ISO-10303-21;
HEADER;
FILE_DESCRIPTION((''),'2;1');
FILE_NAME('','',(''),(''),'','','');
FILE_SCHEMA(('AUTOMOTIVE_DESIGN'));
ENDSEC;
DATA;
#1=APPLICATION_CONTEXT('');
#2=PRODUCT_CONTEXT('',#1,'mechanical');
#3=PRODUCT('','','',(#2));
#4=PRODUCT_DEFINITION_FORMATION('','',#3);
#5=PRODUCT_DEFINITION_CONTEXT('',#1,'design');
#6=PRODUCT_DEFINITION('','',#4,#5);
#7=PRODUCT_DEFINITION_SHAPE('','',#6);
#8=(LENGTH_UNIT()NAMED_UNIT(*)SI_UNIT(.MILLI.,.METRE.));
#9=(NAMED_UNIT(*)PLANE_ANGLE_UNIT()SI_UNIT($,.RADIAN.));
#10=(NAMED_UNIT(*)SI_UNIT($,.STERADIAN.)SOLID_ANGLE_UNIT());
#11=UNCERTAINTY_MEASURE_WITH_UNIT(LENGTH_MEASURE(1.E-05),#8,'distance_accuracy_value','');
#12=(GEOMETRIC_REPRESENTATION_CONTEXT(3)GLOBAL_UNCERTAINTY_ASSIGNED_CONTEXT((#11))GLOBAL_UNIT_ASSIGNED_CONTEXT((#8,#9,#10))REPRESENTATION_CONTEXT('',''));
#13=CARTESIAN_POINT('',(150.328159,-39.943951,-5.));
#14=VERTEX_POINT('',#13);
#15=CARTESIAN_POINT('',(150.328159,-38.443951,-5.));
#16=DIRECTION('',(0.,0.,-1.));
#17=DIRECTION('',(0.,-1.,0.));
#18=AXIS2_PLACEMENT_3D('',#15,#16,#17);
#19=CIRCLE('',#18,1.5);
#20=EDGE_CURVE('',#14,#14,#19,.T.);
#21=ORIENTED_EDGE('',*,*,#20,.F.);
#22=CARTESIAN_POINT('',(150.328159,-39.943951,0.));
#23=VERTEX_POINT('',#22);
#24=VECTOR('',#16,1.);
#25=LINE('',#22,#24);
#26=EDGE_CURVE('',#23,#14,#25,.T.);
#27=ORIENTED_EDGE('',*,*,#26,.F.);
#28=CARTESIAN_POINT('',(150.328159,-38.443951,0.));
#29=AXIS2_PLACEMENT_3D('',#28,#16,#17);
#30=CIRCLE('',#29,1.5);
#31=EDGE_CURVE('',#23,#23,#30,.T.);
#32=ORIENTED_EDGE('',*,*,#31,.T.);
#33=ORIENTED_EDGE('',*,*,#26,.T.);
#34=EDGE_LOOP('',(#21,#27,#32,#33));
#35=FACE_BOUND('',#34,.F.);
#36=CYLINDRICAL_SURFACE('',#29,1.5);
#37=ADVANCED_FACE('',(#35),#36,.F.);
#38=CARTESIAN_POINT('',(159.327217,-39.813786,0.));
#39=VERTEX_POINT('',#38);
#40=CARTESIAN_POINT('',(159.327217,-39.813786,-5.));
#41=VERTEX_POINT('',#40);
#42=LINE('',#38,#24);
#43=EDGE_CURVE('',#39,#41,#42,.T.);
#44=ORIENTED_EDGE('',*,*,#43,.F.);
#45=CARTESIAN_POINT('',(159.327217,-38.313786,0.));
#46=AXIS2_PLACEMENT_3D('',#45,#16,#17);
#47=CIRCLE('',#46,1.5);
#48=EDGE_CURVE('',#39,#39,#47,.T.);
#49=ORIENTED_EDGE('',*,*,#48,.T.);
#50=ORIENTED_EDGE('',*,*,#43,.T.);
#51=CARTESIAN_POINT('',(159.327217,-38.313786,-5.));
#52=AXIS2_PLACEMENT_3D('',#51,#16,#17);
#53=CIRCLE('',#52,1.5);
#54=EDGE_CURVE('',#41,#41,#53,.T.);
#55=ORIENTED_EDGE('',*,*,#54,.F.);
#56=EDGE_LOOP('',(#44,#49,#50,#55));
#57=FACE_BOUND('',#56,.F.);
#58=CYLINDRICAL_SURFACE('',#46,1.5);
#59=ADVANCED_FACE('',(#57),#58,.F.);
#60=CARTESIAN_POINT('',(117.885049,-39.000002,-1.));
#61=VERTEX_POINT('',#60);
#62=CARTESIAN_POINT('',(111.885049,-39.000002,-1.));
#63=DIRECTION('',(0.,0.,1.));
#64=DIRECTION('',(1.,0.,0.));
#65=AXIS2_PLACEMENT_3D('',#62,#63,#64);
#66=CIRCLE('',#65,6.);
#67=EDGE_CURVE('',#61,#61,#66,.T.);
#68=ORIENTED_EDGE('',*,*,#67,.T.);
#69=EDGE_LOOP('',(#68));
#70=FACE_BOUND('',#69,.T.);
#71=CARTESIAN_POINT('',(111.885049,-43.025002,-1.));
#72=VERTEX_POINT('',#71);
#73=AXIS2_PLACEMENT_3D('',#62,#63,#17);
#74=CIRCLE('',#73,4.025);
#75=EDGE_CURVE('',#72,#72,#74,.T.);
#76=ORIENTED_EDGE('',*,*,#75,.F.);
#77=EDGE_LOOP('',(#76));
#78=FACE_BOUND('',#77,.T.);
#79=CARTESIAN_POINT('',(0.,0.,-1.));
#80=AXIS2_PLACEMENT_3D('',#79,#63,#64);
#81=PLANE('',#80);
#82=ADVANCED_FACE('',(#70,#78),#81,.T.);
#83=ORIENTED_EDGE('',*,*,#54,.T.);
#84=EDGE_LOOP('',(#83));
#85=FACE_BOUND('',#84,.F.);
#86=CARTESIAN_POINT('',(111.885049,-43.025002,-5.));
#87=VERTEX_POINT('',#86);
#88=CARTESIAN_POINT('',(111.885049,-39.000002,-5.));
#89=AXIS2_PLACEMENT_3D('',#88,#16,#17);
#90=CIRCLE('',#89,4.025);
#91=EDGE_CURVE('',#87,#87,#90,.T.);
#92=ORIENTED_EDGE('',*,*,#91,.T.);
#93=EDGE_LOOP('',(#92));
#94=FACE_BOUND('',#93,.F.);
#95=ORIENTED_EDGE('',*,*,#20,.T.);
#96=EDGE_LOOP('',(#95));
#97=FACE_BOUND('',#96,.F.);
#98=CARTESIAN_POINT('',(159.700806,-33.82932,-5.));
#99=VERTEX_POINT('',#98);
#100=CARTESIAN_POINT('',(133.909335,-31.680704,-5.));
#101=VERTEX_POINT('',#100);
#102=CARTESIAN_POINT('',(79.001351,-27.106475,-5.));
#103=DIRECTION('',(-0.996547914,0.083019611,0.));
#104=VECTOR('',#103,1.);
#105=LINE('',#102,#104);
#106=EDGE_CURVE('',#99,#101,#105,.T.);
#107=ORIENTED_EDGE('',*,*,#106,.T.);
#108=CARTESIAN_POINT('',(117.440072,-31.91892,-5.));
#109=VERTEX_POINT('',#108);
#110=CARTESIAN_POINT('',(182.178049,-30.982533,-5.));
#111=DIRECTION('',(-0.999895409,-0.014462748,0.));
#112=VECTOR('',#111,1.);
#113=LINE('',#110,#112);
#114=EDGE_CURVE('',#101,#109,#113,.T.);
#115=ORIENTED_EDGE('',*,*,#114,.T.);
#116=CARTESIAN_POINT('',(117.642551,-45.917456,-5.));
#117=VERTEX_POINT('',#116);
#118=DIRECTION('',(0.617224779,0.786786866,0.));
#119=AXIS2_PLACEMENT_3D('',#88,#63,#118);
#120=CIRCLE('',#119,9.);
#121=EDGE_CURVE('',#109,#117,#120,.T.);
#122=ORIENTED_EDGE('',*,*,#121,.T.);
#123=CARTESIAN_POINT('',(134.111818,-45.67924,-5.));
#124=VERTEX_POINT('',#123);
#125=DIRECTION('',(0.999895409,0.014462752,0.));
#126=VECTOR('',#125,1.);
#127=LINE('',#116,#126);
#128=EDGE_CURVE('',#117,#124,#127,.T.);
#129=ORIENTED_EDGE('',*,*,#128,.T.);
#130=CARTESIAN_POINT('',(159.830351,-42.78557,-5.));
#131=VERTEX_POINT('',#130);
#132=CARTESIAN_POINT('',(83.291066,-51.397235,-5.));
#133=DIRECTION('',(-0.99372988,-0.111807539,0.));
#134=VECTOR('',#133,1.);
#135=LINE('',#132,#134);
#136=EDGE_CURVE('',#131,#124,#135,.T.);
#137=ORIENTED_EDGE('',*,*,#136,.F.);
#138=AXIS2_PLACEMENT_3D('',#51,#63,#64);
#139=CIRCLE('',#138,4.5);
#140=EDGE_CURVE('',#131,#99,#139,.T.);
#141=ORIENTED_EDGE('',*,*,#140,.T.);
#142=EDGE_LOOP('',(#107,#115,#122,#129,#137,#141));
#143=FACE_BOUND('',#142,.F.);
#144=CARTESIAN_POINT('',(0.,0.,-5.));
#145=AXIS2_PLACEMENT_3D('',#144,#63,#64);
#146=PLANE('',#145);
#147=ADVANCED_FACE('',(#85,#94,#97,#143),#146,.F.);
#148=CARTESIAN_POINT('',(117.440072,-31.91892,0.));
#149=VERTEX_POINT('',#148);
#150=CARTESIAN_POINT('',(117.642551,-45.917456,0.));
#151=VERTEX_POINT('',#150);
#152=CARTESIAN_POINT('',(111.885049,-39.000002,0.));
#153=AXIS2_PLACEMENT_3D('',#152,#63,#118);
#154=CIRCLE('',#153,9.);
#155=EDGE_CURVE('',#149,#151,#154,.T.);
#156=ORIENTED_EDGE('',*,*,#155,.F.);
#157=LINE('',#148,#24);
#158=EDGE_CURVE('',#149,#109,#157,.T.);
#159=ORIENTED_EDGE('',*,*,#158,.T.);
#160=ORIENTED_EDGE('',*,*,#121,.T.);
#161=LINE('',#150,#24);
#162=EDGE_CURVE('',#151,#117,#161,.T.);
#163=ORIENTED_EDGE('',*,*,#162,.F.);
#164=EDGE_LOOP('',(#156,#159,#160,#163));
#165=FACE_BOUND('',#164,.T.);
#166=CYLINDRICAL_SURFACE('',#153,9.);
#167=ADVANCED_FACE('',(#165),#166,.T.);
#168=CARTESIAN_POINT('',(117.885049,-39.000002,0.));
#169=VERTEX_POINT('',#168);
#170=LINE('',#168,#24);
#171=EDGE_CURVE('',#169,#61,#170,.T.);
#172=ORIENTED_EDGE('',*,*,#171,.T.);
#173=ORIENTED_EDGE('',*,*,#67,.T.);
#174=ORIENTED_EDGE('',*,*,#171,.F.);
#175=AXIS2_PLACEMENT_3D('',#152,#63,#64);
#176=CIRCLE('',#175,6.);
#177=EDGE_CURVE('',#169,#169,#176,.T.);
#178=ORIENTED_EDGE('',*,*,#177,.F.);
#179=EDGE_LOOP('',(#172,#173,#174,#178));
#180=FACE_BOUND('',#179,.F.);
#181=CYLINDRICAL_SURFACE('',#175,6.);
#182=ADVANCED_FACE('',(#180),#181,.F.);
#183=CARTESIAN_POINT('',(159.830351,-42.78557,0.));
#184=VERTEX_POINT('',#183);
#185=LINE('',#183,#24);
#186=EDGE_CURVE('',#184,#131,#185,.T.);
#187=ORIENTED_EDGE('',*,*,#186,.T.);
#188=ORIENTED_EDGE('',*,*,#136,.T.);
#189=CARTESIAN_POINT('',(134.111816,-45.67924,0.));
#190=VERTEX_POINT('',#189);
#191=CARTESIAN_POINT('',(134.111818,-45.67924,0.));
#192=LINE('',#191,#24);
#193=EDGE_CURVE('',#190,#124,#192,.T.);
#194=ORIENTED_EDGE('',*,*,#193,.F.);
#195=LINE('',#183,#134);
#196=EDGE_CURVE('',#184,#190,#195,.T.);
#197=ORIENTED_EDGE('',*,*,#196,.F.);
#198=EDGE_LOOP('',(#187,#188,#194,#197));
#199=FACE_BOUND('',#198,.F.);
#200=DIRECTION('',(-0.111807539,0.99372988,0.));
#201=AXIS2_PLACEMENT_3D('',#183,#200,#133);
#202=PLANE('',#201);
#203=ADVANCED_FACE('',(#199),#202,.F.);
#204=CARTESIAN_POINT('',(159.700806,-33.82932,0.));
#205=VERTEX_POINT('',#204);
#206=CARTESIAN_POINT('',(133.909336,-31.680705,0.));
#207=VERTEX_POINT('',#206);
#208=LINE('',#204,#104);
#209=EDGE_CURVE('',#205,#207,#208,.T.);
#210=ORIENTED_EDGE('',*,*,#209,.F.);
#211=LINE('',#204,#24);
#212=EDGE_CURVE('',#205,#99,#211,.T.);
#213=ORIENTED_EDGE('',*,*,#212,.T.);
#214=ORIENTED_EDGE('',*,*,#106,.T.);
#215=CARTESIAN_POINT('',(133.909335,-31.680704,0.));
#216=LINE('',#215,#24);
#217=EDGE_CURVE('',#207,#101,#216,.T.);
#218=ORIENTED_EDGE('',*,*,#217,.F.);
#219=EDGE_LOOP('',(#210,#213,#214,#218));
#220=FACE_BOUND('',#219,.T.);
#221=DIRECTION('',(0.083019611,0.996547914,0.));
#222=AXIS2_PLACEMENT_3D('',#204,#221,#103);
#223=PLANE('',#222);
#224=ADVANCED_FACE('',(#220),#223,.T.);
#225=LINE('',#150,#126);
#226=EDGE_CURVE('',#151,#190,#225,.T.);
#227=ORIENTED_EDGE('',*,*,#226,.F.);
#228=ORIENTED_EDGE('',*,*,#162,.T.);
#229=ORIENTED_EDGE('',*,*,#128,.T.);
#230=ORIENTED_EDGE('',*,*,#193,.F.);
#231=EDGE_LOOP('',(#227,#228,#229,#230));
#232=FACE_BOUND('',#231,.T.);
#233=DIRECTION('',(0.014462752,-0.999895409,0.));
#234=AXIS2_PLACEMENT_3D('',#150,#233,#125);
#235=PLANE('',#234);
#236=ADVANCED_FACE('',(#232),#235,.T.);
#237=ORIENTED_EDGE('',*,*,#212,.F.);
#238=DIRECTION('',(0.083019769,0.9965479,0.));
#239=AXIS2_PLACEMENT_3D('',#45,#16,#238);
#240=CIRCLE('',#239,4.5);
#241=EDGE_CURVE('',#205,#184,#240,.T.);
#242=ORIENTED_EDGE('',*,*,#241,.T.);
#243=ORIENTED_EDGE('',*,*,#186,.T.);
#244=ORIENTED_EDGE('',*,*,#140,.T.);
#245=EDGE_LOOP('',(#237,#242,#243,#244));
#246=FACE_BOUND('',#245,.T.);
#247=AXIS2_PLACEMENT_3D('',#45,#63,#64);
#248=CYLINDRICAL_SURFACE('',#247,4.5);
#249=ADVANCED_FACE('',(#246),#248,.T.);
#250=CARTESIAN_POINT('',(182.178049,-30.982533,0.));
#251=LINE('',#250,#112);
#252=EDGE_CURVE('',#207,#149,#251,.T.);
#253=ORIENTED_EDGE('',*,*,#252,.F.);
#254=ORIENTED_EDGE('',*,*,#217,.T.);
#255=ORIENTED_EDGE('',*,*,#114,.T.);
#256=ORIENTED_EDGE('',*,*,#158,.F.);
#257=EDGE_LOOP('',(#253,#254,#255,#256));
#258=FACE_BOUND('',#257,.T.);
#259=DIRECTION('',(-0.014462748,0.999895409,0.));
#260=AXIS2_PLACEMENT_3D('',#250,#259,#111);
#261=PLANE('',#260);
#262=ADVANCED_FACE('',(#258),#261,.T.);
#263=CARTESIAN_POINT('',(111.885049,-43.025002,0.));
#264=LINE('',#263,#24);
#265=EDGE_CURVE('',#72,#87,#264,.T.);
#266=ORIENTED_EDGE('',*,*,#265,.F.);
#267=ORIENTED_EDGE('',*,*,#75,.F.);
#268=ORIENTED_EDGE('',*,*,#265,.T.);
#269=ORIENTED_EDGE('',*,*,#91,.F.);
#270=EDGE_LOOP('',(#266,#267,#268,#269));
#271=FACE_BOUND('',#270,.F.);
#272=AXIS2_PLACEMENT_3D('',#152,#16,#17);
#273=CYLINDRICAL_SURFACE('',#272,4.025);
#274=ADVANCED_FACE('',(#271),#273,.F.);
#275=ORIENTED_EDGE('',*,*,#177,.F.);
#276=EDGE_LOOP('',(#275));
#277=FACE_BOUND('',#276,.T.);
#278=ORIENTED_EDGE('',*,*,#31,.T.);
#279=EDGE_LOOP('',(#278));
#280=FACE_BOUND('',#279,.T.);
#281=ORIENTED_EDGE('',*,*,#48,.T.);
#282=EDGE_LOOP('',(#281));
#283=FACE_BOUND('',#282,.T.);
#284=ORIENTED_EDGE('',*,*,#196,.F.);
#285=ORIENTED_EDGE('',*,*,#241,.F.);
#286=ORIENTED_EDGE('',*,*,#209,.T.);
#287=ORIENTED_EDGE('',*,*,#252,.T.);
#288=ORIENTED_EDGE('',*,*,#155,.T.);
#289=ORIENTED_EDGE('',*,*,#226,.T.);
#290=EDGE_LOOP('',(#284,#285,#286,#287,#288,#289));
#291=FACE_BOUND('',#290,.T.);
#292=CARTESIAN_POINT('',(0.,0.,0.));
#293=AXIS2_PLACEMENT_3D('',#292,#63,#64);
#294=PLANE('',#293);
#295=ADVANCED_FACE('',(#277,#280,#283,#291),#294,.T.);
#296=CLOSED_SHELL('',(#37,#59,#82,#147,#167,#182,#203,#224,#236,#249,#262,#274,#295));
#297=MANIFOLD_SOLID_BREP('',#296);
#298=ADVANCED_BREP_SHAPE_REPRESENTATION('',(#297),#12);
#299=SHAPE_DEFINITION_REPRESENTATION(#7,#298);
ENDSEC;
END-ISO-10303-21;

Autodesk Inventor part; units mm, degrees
ref_plane "YZ Plane" through (0, 0, 0) normal (1, 0, 0) x (0, 1, 0)
ref_plane "XZ Plane" through (0, 0, 0) normal (0, 1, 0) x (-1, 0, 0)
ref_plane "XY Plane" through (0, 0, 0) normal (0, 0, 1) x (1, 0, 0)
sketch "スケッチ1" plane through (0, 0, 0) normal (0, 0, 1) x (1, 0, 0)
  line L0 (-101.5, 47.999998) -> (108.5, 47.999998)
  circle A0 centre (111.885049, -39.000002) radius 4
  circle A1 centre (191.876682, -37.842982) radius 4
  circle A2 centre (111.885049, -39.000002) radius 7
  circle A3 centre (191.876682, -37.842982) radius 7
  line L1 (191.876682, -37.842982) -> (111.885049, -39.000002) construction
  line L2 (191.775442, -30.843714) -> (111.78381, -32.000734)
  line L3 (111.986288, -45.99927) -> (191.977921, -44.84225)
  arc A4 (191.977921, -44.84225) -> (191.775442, -30.843714) centre (191.876682, -37.842982) ccw
  arc A5 (111.78381, -32.000734) -> (111.986288, -45.99927) centre (111.885049, -39.000002) ccw
  line L4 (193.542302, -31.044032) -> (241.704818, -42.842982)
  circle A6 centre (234.566446, -71.981335) radius 30
  line L5 (262.587356, -82.697145) -> (213.725294, -50.402494)
  line L6 (213.725294, -50.402494) -> (190.211062, -44.641931)
  line L7 (264.566446, -121.542906) -> (264.566446, -63.2267)
  line L8 (111.885049, -39.000002) -> (111.885049, 40.999998) construction
  line L9 (118.885049, -39.000002) -> (118.885049, 40.999998)
  line L10 (104.885049, 40.999998) -> (104.885049, -39.000002)
  arc A7 (104.885049, -39.000002) -> (118.885049, -39.000002) centre (111.885049, -39.000002) ccw
  arc A8 (118.885049, 40.999998) -> (104.885049, 40.999998) centre (111.885049, 40.999998) ccw
  circle A9 centre (58.238326, 51.481995) radius 30
  line L11 (113.558078, 34.202868) -> (65.408448, 22.351438)
  line L12 (28.441083, 47.999998) -> (86.70408, 42.010942)
  line L13 (86.70408, 42.010942) -> (110.21202, 47.797128)
  circle A10 centre (113.5, -20.000002) radius 68
  line L14 (315.327237, -100.585467) -> (70.600424, 104.764712)
  line L15 (253.850074, -49.000002) -> (111.885049, -39.000002)
  arc A11 (93.592427, -27.104845) -> (135.370976, -5.924402) centre (95.060351, 21.794105) ccw
  arc A12 (135.370976, -5.924402) -> (135.847591, -3.671647) centre (132.898992, -4.224609) ccw
  arc A13 (135.847591, -3.671647) -> (83.183341, 18.55647) centre (102.157897, -9.989602) ccw
  line L16 (111.885049, -39.000002) -> (112.74718, 40.995353) construction
  line L17 (118.884642, -39.075438) -> (119.746773, 40.919916)
  line L18 (105.747586, 41.070789) -> (104.885455, -38.924565)
  arc A14 (104.885455, -38.924565) -> (118.884642, -39.075438) centre (111.885049, -39.000002) ccw
  arc A15 (119.746773, 40.919916) -> (105.747586, 41.070789) centre (112.74718, 40.995353) ccw
  line L19 (164.994898, 47.999998) -> (164.994898, 25.999998)
  line L20 (164.994898, 25.999998) -> (327.494898, -102.000002)
  circle A16 centre (116.292557, -40.000002) radius 68
  circle A17 centre (-98.885049, -0.000002) radius 67.5
  line L21 (321.363327, -8.500986) -> (-152.668056, 78.49822)
  line L22 (104.889695, -3) -> (104.889695, 0)
  line L23 (104.889695, -3) -> (64.444342, -3)
  line L24 (72.06562, 0) -> (104.889695, 0)
  circle A18 centre (83.376901, -17.5) radius 13.85
  line L25 (198.510163, -35.607603) -> (190.779084, -12.665641)
  line L26 (185.2432, -40.07836) -> (169.408184, 6.912016)
  circle A19 centre (197.837392, 16.492211) radius 30
  line L27 (190.779084, -12.665641) -> (191.876682, 45.89408)
  circle A20 centre (191.876682, -37.842982) radius 83.737062
  line L28 (191.876682, 45.89408) -> (191.876682, -37.842982)
  line L29 (96.889695, -3) -> (96.889695, -6)
  line L30 (96.889695, -6) -> (87.889695, -6)
  line L31 (87.889695, -6) -> (87.889695, -3)
  line L32 (76.444342, -3) -> (76.444342, -6)
  line L33 (76.444342, -6) -> (67.444342, -6)
  line L34 (67.444342, -6) -> (67.444342, -3)
  line L35 (99.889695, -3) -> (99.889695, 0)
  line L36 (99.889695, 0) -> (84.889695, 0)
  line L37 (84.889695, 0) -> (84.889695, -3)
  line L38 (79.444342, -3) -> (79.444342, 0)
  line L39 (79.444342, 0) -> (64.444342, 0)
  line L40 (64.444342, 0) -> (64.444342, -3)
  line L41 (64.444342, 0) -> (59.444342, 0)
  line L42 (59.444342, 0) -> (59.444342, -3)
  line L43 (59.444342, -3) -> (64.444342, -3)
  line L44 (59.444342, -3) -> (59.444342, -6)
  circle A21 centre (111.885049, -39.000002) radius 1.5
  circle A22 centre (111.885049, -39.000002) radius 9
  circle A23 centre (111.885049, -39.000002) radius 10
  circle A24 centre (111.885049, -39.000002) radius 15
  line L45 (121.057661, -50.868582) -> (142.927269, -50.552254)
  line L46 (121.057661, -50.868582) -> (127.651316, -45.772687)
  line L47 (127.651316, -45.772687) -> (126.808053, -37.482129)
  line L48 (124.15135, -30.366471) -> (104.889695, -3)
  line L49 (101.060181, -49.383751) -> (59.444342, -6)
  circle A25 centre (95.889695, -6) radius 1
  circle A26 centre (88.889695, -6) radius 1
  circle A27 centre (95.889695, -3) radius 1
  circle A28 centre (88.889695, -3) radius 1
  circle A29 centre (100.889695, -3) radius 1
  circle A30 centre (83.889695, -3) radius 1
  circle A31 centre (80.444342, -3) radius 1
  circle A32 centre (75.444342, -6) radius 1
  circle A33 centre (68.444342, -6) radius 1
  circle A34 centre (75.444342, -3) radius 1
  circle A35 centre (68.444342, -3) radius 1
  circle A36 centre (63.444342, -3) radius 1
  line L50 (189.021336, -49.498324) -> (211.692496, -55.05235)
  line L51 (211.692496, -55.05235) -> (259.830429, -86.868398)
  circle A37 centre (191.876682, -37.842982) radius 8
  circle A38 centre (191.876682, -37.842982) radius 13
  line L52 (198.876682, -21.280236) -> (198.876682, -52.125839)
  circle A39 centre (194.376682, -52.125839) radius 4.5
  circle A40 centre (194.376682, -52.125839) radius 1.5
  circle A41 centre (177.559161, -35.549813) radius 1.5
  circle A42 centre (194.376682, -52.125839) radius 4.5
  circle A43 centre (177.559161, -35.549813) radius 4.5
  circle A44 centre (191.876682, -37.842982) radius 1.5
  circle A45 centre (191.876682, -37.842982) radius 4.5
  line L53 (198.809292, -51.349976) -> (196.309292, -37.06712)
  line L54 (192.588353, -33.399614) -> (178.270831, -31.106451)
  circle A46 centre (181.698049, -48.169909) radius 1.5
  circle A47 centre (181.698049, -48.169909) radius 4.5
  line L55 (193.036341, -56.421591) -> (180.357708, -52.465661)
  line L56 (177.422132, -49.57224) -> (173.283242, -36.952144)
  point P0 (0, 0)
  point P1 (0, 0)
  point P2 (151.880865, -38.421492)
  point P3 (111.885049, 0.999998)
  point P4 (105.885049, -0.000002)
  point P5 (105.885049, -0.000002)
  point P6 (23.732778, -42.728965)
  point P7 (112.316114, 0.997675)
  point P8 (99.889695, -1.5)
  point P9 (76.444342, -4.5)
  point P10 (74.444342, -6)
  point P11 (69.444342, -6)
  point P12 (69.444342, -3)
  point P13 (74.444342, -3)
  point P14 (82.889695, -3)
  point P15 (81.444342, -3)
  point P16 (62.444342, -3)
  point P17 (101.889695, -3)
  point P18 (89.889695, -3)
  point P19 (94.889695, -3)
  point P20 (94.889695, -6)
  point P21 (89.889695, -6)
  point P22 (118.961603, -31.934425)
  point P23 (118.924491, -31.897449)
  point P24 (118.962007, -31.896907)
  point P25 (119.12697, -45.895985)
  point P26 (104.885049, -3)
  point P27 (104.885049, -31.858573)
  point P28 (117.642551, -45.917456)
  point P29 (175.94693, -45.074126)
  point P30 (198.871572, -51.911454)
  point P31 (198.876682, -51.912706)
  point P32 (198.876682, -46.764852)
  point P33 (193.972807, -45.563491)
  point P34 (184.006402, -36.408166)
  point P35 (182.178049, -30.982533)
  point P36 (117.440072, -31.91892)
  point P37 (180.360015, -43.873438)
  point P38 (180.33295, -43.821464)
  point P39 (180.497374, -43.833046)
  dimension "d27" = 167.47412
  dimension "d70" = 9
  dimension "d0" = 8
  dimension "d1" = 8
  dimension "d2" = 3
  dimension "d3" = 3
  dimension "d4" = 80
  dimension "d5" = 14
  dimension "d6" = 14
  dimension "d7" = 60
  dimension "d8" = 14
  dimension "d9" = 60
  dimension "d10" = 14
  dimension "d11" = 6
  dimension "d12" = 40
  dimension "d13" = 13.271
  dimension "d14" = 14
  dimension "d15" = 10
  dimension "d16" = 5
  dimension "d17" = 22
  dimension "d18" = 150
  dimension "d19" = 162.5
  dimension "d20" = 0
  dimension "d21" = 136
  dimension "d22" = 136
  dimension "d23" = 135
  dimension "d24" = 38.2272
  dimension "d25" = 25
  dimension "d26" = 60
  dimension "d28" = 5
  dimension "d29" = 3
  dimension "d30" = 5
  dimension "d31" = 3
  dimension "d32" = 3
  dimension "d33" = 5
  dimension "d34" = 1
  dimension "d35" = 5
  dimension "d36" = 5
  dimension "d37" = 2
  dimension "d38" = 2
  dimension "d39" = 2
  dimension "d40" = 2
  dimension "d41" = 2
  dimension "d42" = 2
  dimension "d43" = 2
  dimension "d44" = 2
  dimension "d45" = 2
  dimension "d46" = 2
  dimension "d47" = 2
  dimension "d48" = 2
  dimension "d49" = 5
  dimension "d50" = 1
  dimension "d51" = 6
  dimension "d57" = 3
  dimension "d58" = 3
  dimension "d59" = 3
  dimension "d60" = 3
  dimension "d61" = 3
  dimension "d62" = 3
  dimension "d65" = 109.028
  dimension "d67" = 3
  dimension "d68" = 9
  dimension "d69" = 72.2057
  dimension "d71" = 54.514
sketch "スケッチ1 outline for 押し出し1" plane through (0, 0, 0) normal (0, 0, 1) x (1, 0, 0)
  arc A0 (117.440072, -31.91892) -> (117.642551, -45.917456) centre (111.885049, -39.000002) ccw
  line L0 (182.178049, -30.982533) -> (117.440072, -31.91892)
  line L1 (117.642551, -45.917456) -> (175.94693, -45.074126)
  line L2 (184.006402, -36.408166) -> (182.178049, -30.982533)
  line L3 (175.94693, -45.074126) -> (177.422132, -49.57224)
  arc A1 (193.972807, -45.563491) -> (184.006402, -36.408166) centre (191.876682, -37.842982) cw
  arc A2 (177.422132, -49.57224) -> (180.357708, -52.465661) centre (181.698047, -48.169912) ccw
  line L4 (198.876682, -46.764852) -> (193.972807, -45.563491)
  line L5 (180.357708, -52.465661) -> (193.036341, -56.421591)
  line L6 (198.876682, -51.912706) -> (198.876682, -46.764852)
  arc A3 (193.036341, -56.421591) -> (198.871572, -51.911454) centre (194.376682, -52.125838) ccw
  line L7 (198.871572, -51.911454) -> (198.876682, -51.912706)
  arc A4 (180.360015, -43.873438) -> (180.33295, -43.821464) centre (191.876682, -37.842982) cw
  arc A5 (180.497374, -43.833046) -> (180.360015, -43.873438) centre (181.698049, -48.169909) ccw
  line L8 (180.33295, -43.821464) -> (180.497374, -43.833046)
  circle A6 centre (181.698049, -48.169909) radius 1.5
  circle A7 centre (194.376682, -52.125839) radius 1.5
  circle A8 centre (177.559161, -35.549813) radius 1.5
extrude "押し出し1" add sketch "スケッチ1 outline for 押し出し1" against normal blind 5
hole "穴1" at (105.885049, -0.000002, 0) at (113.5, -20.000002, 0) at (23.732778, -42.728965, 0) at (-98.885049, -0.000002, 0) at (111.885049, -39.000002, 0) direction (0, 0, -1) diameter 8.05 depth 12 tip angle 118
sketch "スケッチ2" plane through (0, 0, 0) normal (0, 0, 1) x (1, 0, 0)
  circle A0 centre (111.885049, -39.000002) radius 4.025
  line L0 (182.178049, -30.982533) -> (117.440072, -31.91892)
  arc A1 (117.440072, -31.91892) -> (117.642551, -45.917456) centre (111.885049, -39.000002) ccw
  line L1 (117.642551, -45.917456) -> (175.94693, -45.074126)
  line L2 (175.94693, -45.074126) -> (177.422132, -49.57224)
  arc A2 (177.422132, -49.57224) -> (180.357708, -52.465661) centre (181.698049, -48.169909) ccw
  line L3 (180.357708, -52.465661) -> (193.036341, -56.421591)
  arc A3 (193.036341, -56.421591) -> (198.871572, -51.911454) centre (194.376682, -52.125839) ccw
  line L4 (198.871572, -51.911454) -> (198.876682, -51.912706)
  line L5 (198.876682, -51.912706) -> (198.876682, -46.764852)
  line L6 (198.876682, -46.764852) -> (193.972807, -45.563491)
  arc A4 (184.006402, -36.408166) -> (193.972807, -45.563491) centre (191.876682, -37.842982) ccw
  line L7 (184.006402, -36.408166) -> (182.178049, -30.982533)
  circle A5 centre (194.376682, -52.125839) radius 1.5
  circle A6 centre (177.559161, -35.549813) radius 1.5
  circle A7 centre (181.698049, -48.169909) radius 1.5
  arc A8 (180.497374, -43.833046) -> (180.360015, -43.873438) centre (181.698049, -48.169909) ccw
  arc A9 (180.33295, -43.821464) -> (180.360015, -43.873438) centre (191.876682, -37.842982) ccw
  line L8 (180.33295, -43.821464) -> (180.497374, -43.833046)
  circle A10 centre (191.876682, -37.842982) radius 4.025
  arc A11 (193.542302, -31.044032) -> (185.672866, -34.600657) centre (191.876682, -37.842982) ccw
  line L9 (185.672866, -34.600657) -> (178.725027, -47.894548)
  line L10 (178.725027, -47.894548) -> (183.433896, -52.404723)
  line L11 (183.433896, -52.404723) -> (188.697561, -50.51843)
  line L12 (188.697561, -50.51843) -> (189.57433, -47.017413)
  line L13 (189.57433, -47.017413) -> (184.168816, -48.954539)
  line L14 (184.168816, -48.954539) -> (183.179583, -48.007047)
  line L15 (183.179583, -48.007047) -> (184.569151, -45.348268)
  line L16 (184.569151, -45.348268) -> (191.263493, -44.899758)
  line L17 (191.263493, -44.899758) -> (213.725294, -50.402494)
  line L18 (213.725294, -50.402494) -> (262.587356, -82.697145)
  arc A12 (262.587356, -82.697145) -> (241.704818, -42.842982) centre (234.566446, -71.981335) ccw
  line L19 (241.704818, -42.842982) -> (193.542302, -31.044032)
  circle A13 centre (191.876682, -37.842982) radius 16.83226
  circle A14 centre (177.559161, -35.549813) radius 1.5
  circle A15 centre (178.961677, -35.529526) radius 4.5
  line L20 (182.178049, -30.982533) -> (117.440072, -31.91892)
  circle A16 centre (178.961677, -35.529526) radius 1.5
  circle A17 centre (166.904743, -40.704444) radius 4.5
  circle A18 centre (166.904743, -40.704444) radius 1.5
  line L21 (191.876682, -37.842982) -> (178.961677, -35.529526)
  line L22 (178.961677, -35.529526) -> (166.904743, -40.704444)
  point P0 (0, 0)
  point P1 (0, 0)
  dimension "d82" = 9
  dimension "d83" = 3
  dimension "d84" = 9
  dimension "d85" = 3
sketch "スケッチ3" plane through (0, 0, 0) normal (0, 0, 1) x (1, 0, 0)
  circle A0 centre (191.876682, -37.842982) radius 4.025
  line L0 (185.418769, -40.543975) -> (191.206612, -54.382359)
  line L1 (191.206612, -54.382359) -> (196.207213, -53.344445)
  line L2 (196.207213, -53.344445) -> (200.870857, -49.312531)
  line L3 (200.870857, -49.312531) -> (194.016935, -50.735116)
  line L4 (194.016935, -50.735116) -> (192.175534, -46.332438)
  line L5 (192.175534, -46.332438) -> (193.402436, -45.42376)
  line L6 (193.402436, -45.42376) -> (213.725294, -50.402494)
  line L7 (213.725294, -50.402494) -> (262.587356, -82.697145)
  arc A1 (262.587356, -82.697145) -> (241.704818, -42.842982) centre (234.566446, -71.981335) ccw
  line L8 (241.704818, -42.842982) -> (193.542302, -31.044032)
  arc A2 (193.542302, -31.044032) -> (185.418769, -40.543975) centre (191.876682, -37.842982) ccw
  point P0 (0, 0)
  point P1 (0, 0)
sketch "スケッチ4" plane through (0, 0, 0) normal (0, 0, 1) x (1, 0, 0)
  line L0 (194.745121, -45.752694) -> (213.725294, -50.402494)
  line L1 (213.725294, -50.402494) -> (262.587356, -82.697145)
  arc A0 (262.587356, -82.697145) -> (241.704818, -42.842982) centre (234.566446, -71.981335) ccw
  line L2 (241.704818, -42.842982) -> (193.542302, -31.044032)
  arc A1 (193.542302, -31.044032) -> (185.418769, -40.543975) centre (191.876682, -37.842982) ccw
  line L3 (185.418769, -40.543975) -> (191.206612, -54.382359)
  line L4 (191.206612, -54.382359) -> (195.655899, -53.216469)
  line L5 (195.655899, -53.216469) -> (195.656069, -53.216296)
  arc A2 (195.656069, -53.216296) -> (195.656308, -53.216236) centre (194.922022, -50.307486) ccw
  line L6 (195.656308, -53.216236) -> (198.568436, -51.556289)
  line L7 (198.568436, -51.556289) -> (199.758723, -49.040078)
  line L8 (199.758723, -49.040078) -> (195.762722, -50.087189)
  arc A3 (194.586681, -49.505705) -> (195.762722, -50.087189) centre (195.50924, -49.119849) ccw
  line L9 (194.586681, -49.505705) -> (193.584616, -47.109828)
  arc A4 (194.745121, -45.752694) -> (193.584616, -47.109828) centre (194.507175, -46.723972) ccw
  circle A5 centre (191.876682, -37.842982) radius 4.025
  circle A6 centre (111.885049, -39.000002) radius 4.025
  line L10 (182.178049, -30.982533) -> (117.440072, -31.91892)
  arc A7 (117.440072, -31.91892) -> (117.642551, -45.917456) centre (111.885049, -39.000002) ccw
  line L11 (117.642551, -45.917456) -> (175.94693, -45.074126)
  line L12 (175.94693, -45.074126) -> (177.422132, -49.57224)
  arc A8 (177.422132, -49.57224) -> (180.357708, -52.465661) centre (181.698049, -48.169909) ccw
  line L13 (180.357708, -52.465661) -> (193.036341, -56.421591)
  arc A9 (193.036341, -56.421591) -> (198.871572, -51.911454) centre (194.376682, -52.125839) ccw
  line L14 (198.871572, -51.911454) -> (198.876682, -51.912706)
  line L15 (198.876682, -51.912706) -> (198.876682, -46.764852)
  line L16 (198.876682, -46.764852) -> (193.972807, -45.563491)
  arc A10 (184.006402, -36.408166) -> (193.972807, -45.563491) centre (191.876682, -37.842982) ccw
  line L17 (184.006402, -36.408166) -> (182.178049, -30.982533)
  circle A11 centre (194.376682, -52.125839) radius 1.5
  circle A12 centre (177.559161, -35.549813) radius 1.5
  circle A13 centre (181.698049, -48.169909) radius 1.5
  arc A14 (180.497374, -43.833046) -> (180.360015, -43.873438) centre (181.698049, -48.169909) ccw
  arc A15 (180.33295, -43.821464) -> (180.360015, -43.873438) centre (191.876682, -37.842982) ccw
  line L18 (180.33295, -43.821464) -> (180.497374, -43.833046)
  line L19 (191.876682, -37.842982) -> (111.885049, -39.000002) construction
  line L20 (191.775442, -30.843714) -> (111.78381, -32.000734)
  line L21 (111.986288, -45.99927) -> (191.977921, -44.84225)
  arc A16 (191.977921, -44.84225) -> (191.775442, -30.843714) centre (191.876682, -37.842982) ccw
  arc A17 (111.78381, -32.000734) -> (111.986288, -45.99927) centre (111.885049, -39.000002) ccw
  circle A18 centre (178.961677, -35.529526) radius 4.5
  circle A19 centre (178.961677, -35.529526) radius 1.5
  circle A20 centre (183.157555, -46.799925) radius 1.5
  circle A21 centre (183.157555, -46.799925) radius 4.5
  line L22 (182.178049, -30.982533) -> (117.440072, -31.91892)
  line L23 (197.834841, -41.517261) -> (208.997311, -23.41636)
  line L24 (197.834841, -41.517261) -> (181.973255, -67.238185)
  circle A22 centre (170.35293, -38.154307) radius 4.5
  circle A23 centre (170.35293, -38.154307) radius 1.5
  line L25 (188.270523, -60.320544) -> (180.805974, -42.473256)
  arc A24 (194.73203, -26.18764) -> (180.805974, -42.473256) centre (191.876682, -37.842982) ccw
  line L26 (194.73203, -26.18764) -> (242.894547, -37.986589)
  arc A25 (264.570959, -90.00158) -> (242.894547, -37.986589) centre (234.566446, -71.981335) ccw
  line L27 (264.570959, -90.00158) -> (211.692496, -55.05235)
  line L28 (208.863654, -41.485411) -> (202.414104, -55.119458)
  line L29 (202.414104, -55.119458) -> (198.735697, -57.216192)
  line L30 (198.735697, -57.216192) -> (198.256714, -57.703764)
  line L31 (198.256714, -57.703764) -> (188.270523, -60.320544)
  line L32 (189.614177, -50.574943) -> (183.680676, -51.269416)
  arc A26 (184.006402, -36.408166) -> (193.972807, -45.563491) centre (191.876682, -37.842982) ccw
  point P0 (0, 0)
  point P1 (0, 0)
  point P2 (151.880865, -38.421492)
  point P3 (186.913184, -44.11703)
  point P4 (186.913184, -44.11703)
  point P5 (179.020383, -45.029671)
  dimension "d90" = 9
  dimension "d86" = 14
  dimension "d87" = 9
  dimension "d88" = 3
  dimension "d89" = 3
  dimension "d91" = 122.49
  dimension "d92" = 9
  dimension "d93" = 3
  dimension "d94" = 5
  dimension "d95" = 7
extrude "押し出し2" cut sketch "スケッチ4" against normal blind 10 contours L0 L24 A2 L9 A4 | A4 L9 A2 L24 L3 L21 A10 L16 | L0 L15 L8 A2 L24 | L24 L9 A2 | A2 L8 A3 L9 L24 | L9 L24 A2 | L21 L3 A10 | L15 L7 L6 A2 L8 | A2 L6 A11 L24 L9 A3 L8 | A2 A11 L4 L3 L24 | L15 L14 A9 L13 L24 L3 L4 A11 A2 L6 L7 | L24 L13 L25 L32 L3 | A2 L6 | A2 L4 A11 | L25 L13 A8 L12 L21 A21 L32 picked at (195.430042, -53.271235)
extrude "押し出し3" add sketch "スケッチ4" against normal blind 5 contours A20 A13 | A13 L25 A20 | A13 L25 | A19 A12 | A12 A19 picked at (182.922726, -47.847814)
hole "穴2" at (183.157555, -46.799925, 0) at (178.961677, -35.529526, 0) at (170.35293, -38.154307, 0) direction (0, 0, -1) diameter 3 depth 12 tip angle 118
sketch "スケッチ5" plane through (0, 0, 0) normal (0, 0, 1) x (1, 0, 0)
  circle A0 centre (178.961677, -35.529526) radius 1.5
  circle A1 centre (183.157555, -46.799925) radius 1.5
  circle A2 centre (170.35293, -38.154307) radius 1.5
  line L0 (189.614177, -50.574943) -> (186.913184, -44.11703)
  arc A3 (184.006402, -36.408166) -> (186.913184, -44.11703) centre (191.876682, -37.842982) ccw
  line L1 (184.006402, -36.408166) -> (182.178049, -30.982533)
  line L2 (182.178049, -30.982533) -> (117.440072, -31.91892)
  arc A4 (117.440072, -31.91892) -> (117.642551, -45.917456) centre (111.885049, -39.000002) ccw
  line L3 (117.642551, -45.917456) -> (179.020383, -45.029671)
  arc A5 (179.020383, -45.029671) -> (183.680676, -51.269416) centre (183.157555, -46.799925) ccw
  line L4 (183.680676, -51.269416) -> (189.614177, -50.574943)
  circle A6 centre (111.885049, -39.000002) radius 4.025
  arc A7 (180.497374, -43.833046) -> (180.360015, -43.873438) centre (181.698049, -48.169909) ccw
  arc A8 (180.33295, -43.821464) -> (180.360015, -43.873438) centre (191.876682, -37.842982) ccw
  line L5 (180.33295, -43.821464) -> (180.497374, -43.833046)
  circle A9 centre (111.885049, -39.000002) radius 4.025
  circle A10 centre (111.885049, -39.000002) radius 6
  point P0 (0, 0)
  dimension "d107" = 12
extrude "押し出し4" cut sketch "スケッチ5" against normal blind 1 contours A10
sketch "スケッチ6" plane through (0, 0, 0) normal (0, 0, 1) x (1, 0, 0)
  circle A0 centre (111.885049, -39.000002) radius 6
  circle A1 centre (178.961677, -35.529526) radius 1.5
  circle A2 centre (183.157555, -46.799925) radius 1.5
  circle A3 centre (170.35293, -38.154307) radius 1.5
  line L0 (189.614177, -50.574943) -> (186.913184, -44.11703)
  arc A4 (184.006402, -36.408166) -> (186.913184, -44.11703) centre (191.876682, -37.842982) ccw
  line L1 (184.006402, -36.408166) -> (182.178049, -30.982533)
  line L2 (182.178049, -30.982533) -> (117.440072, -31.91892)
  arc A5 (117.440072, -31.91892) -> (117.642551, -45.917456) centre (111.885049, -39.000002) ccw
  line L3 (117.642551, -45.917456) -> (179.020383, -45.029671)
  arc A6 (179.020383, -45.029671) -> (183.680676, -51.269416) centre (183.157555, -46.799925) ccw
  line L4 (183.680676, -51.269416) -> (189.614177, -50.574943)
  arc A7 (180.497374, -43.833046) -> (180.360015, -43.873438) centre (181.698049, -48.169909) ccw
  arc A8 (180.33295, -43.821464) -> (180.360015, -43.873438) centre (191.876682, -37.842982) ccw
  line L5 (180.33295, -43.821464) -> (180.497374, -43.833046)
  circle A9 centre (170.35293, -38.154307) radius 1.5
  circle A10 centre (170.35293, -38.154307) radius 4.5
  circle A11 centre (191.876682, -37.842982) radius 7
  line L6 (184.006402, -36.408166) -> (185.2432, -40.07836)
  line L7 (188.222991, -43.813789) -> (160.136439, -26.626904)
  line L8 (160.136439, -26.626904) -> (159.163513, -26.031546)
  circle A12 centre (166.361389, -35.71178) radius 4.5
  circle A13 centre (166.361389, -35.71178) radius 1.5
  line L9 (182.178049, -30.982533) -> (117.440072, -31.91892)
  circle A14 centre (175.744086, -41.453294) radius 4.5
  point P0 (0, 0)
  point P1 (178.464745, -45.037708)
  point P2 (173.128236, -45.114896)
  point P3 (167.598953, -31.193409)
  point P4 (184.919442, -41.792263)
  dimension "d110" = 9
  dimension "d111" = 14
  dimension "d112" = 9
  dimension "d113" = 3
  dimension "d114" = 9
  dimension "d115" = 11
extrude "押し出し5" add sketch "スケッチ6" against normal blind 5 contours A3 A12 | A12 A3 | L3 A14 | A7 A8 L5
hole "穴3" at (175.744086, -41.453294, 0) at (166.361389, -35.71178, 0) direction (0, 0, -1) diameter 3 depth 12 tip angle 118
extrude "押し出し6" cut sketch "スケッチ6" against normal blind 10 contours L7 L2 L1 A4
sketch "スケッチ7" plane through (0, 0, 0) normal (0, 0, 1) x (1, 0, 0)
  circle A0 centre (175.744086, -41.453294) radius 1.5
  circle A1 centre (166.361389, -35.71178) radius 1.5
  circle A2 centre (111.885049, -39.000002) radius 6
  circle A3 centre (183.157555, -46.799925) radius 1.5
  line L0 (186.913184, -44.11703) -> (189.614177, -50.574943)
  line L1 (189.614177, -50.574943) -> (183.680676, -51.269416)
  arc A4 (179.020383, -45.029671) -> (183.680676, -51.269416) centre (183.157555, -46.799925) ccw
  line L2 (179.020383, -45.029671) -> (178.464745, -45.037708)
  arc A5 (173.128236, -45.114896) -> (178.464745, -45.037708) centre (175.744086, -41.453294) ccw
  line L3 (173.128236, -45.114896) -> (117.642551, -45.917456)
  arc A6 (117.440072, -31.91892) -> (117.642551, -45.917456) centre (111.885049, -39.000002) ccw
  line L4 (117.440072, -31.91892) -> (167.598953, -31.193409)
  line L5 (167.598953, -31.193409) -> (184.919442, -41.792263)
  arc A7 (184.919442, -41.792263) -> (186.913184, -44.11703) centre (191.876682, -37.842982) ccw
  point P0 (0, 0)
sketch "スケッチ8" plane through (0, 0, 0) normal (0, 0, 1) x (1, 0, 0)
  line L0 (184.919442, -41.792263) -> (167.598953, -31.193409)
  line L1 (167.598953, -31.193409) -> (117.440072, -31.91892)
  arc A0 (117.440072, -31.91892) -> (117.642551, -45.917456) centre (111.885049, -39.000002) ccw
  line L2 (117.642551, -45.917456) -> (173.128236, -45.114896)
  arc A1 (173.128236, -45.114896) -> (178.464745, -45.037708) centre (175.744086, -41.453294) ccw
  line L3 (178.464745, -45.037708) -> (179.020383, -45.029671)
  arc A2 (179.020383, -45.029671) -> (183.680676, -51.269416) centre (183.157555, -46.799925) ccw
  line L4 (183.680676, -51.269416) -> (189.614177, -50.574943)
  line L5 (189.614177, -50.574943) -> (186.913184, -44.11703)
  arc A3 (184.919442, -41.792263) -> (186.913184, -44.11703) centre (191.876682, -37.842982) ccw
  circle A4 centre (183.157555, -46.799925) radius 1.5
  circle A5 centre (111.885049, -39.000002) radius 6
  circle A6 centre (166.361389, -35.71178) radius 1.5
  circle A7 centre (175.744086, -41.453294) radius 1.5
  circle A8 centre (111.885049, -39.000002) radius 4.025
  line L6 (191.876682, -37.842982) -> (111.885049, -39.000002)
  circle A9 centre (166.361389, -35.71178) radius 1.5
  circle A10 centre (166.361389, -35.71178) radius 4.5
  circle A11 centre (160.94376, -38.290404) radius 4.5
  circle A12 centre (160.94376, -38.290404) radius 1.5
  circle A13 centre (151.944701, -38.420568) radius 4.5
  circle A14 centre (151.944701, -38.420568) radius 1.5
  circle A15 centre (160.94376, -38.290404) radius 3
  circle A16 centre (151.944701, -38.420568) radius 3
  line L7 (165.530413, -31.28917) -> (151.113726, -33.997958)
  circle A17 centre (175.744086, -41.453294) radius 4.5
  line L8 (151.375872, -42.884472) -> (175.175257, -45.917198)
  arc A18 (117.440072, -31.91892) -> (117.642551, -45.917456) centre (111.885049, -39.000002) ccw
  circle A19 centre (111.885049, -39.000002) radius 9
  line L9 (161.421253, -42.764999) -> (112.840034, -47.949192)
  line L10 (161.291636, -33.80387) -> (112.580802, -30.026935)
  point P0 (0, 0)
  point P1 (0, 0)
  point P2 (169.312318, -45.170091)
  point P3 (166.296306, -31.212251)
  point P4 (134.111814, -45.67924)
  point P5 (168.71019, -31.873404)
  point P6 (166.296306, -31.212251)
  point P7 (133.909336, -31.680705)
  dimension "d128" = 9
  dimension "d129" = 3
  dimension "d130" = 9
  dimension "d131" = 3
  dimension "d132" = 6
  dimension "d133" = 6
  dimension "d134" = 9
extrude "押し出し7" cut sketch "スケッチ8" against normal blind 10 contours A3 L5 L4 A2 L3 A17 L6 L0 | L6 A17 L0 | A17 L6 A10 L0 | A17 L6 | A17 A1 L6 | A10 L1 L0 | A6 | A10 L6 A11 | A17 L2 L8 L9 A11 A10 L6 | A10 L7 L10 L1 | A10 A11 L6 | A10 A11 L10 L7 | L2 L9 L8 | A7
sketch "スケッチ9" plane through (0, 0, 0) normal (0, 0, 1) x (1, 0, 0)
  line L0 (161.291636, -33.80387) -> (133.909336, -31.680705)
  line L1 (133.909336, -31.680705) -> (117.440072, -31.91892)
  arc A0 (117.440072, -31.91892) -> (117.642551, -45.917456) centre (111.885049, -39.000002) ccw
  line L2 (117.642551, -45.917456) -> (134.111814, -45.67924)
  line L3 (134.111814, -45.67924) -> (161.421253, -42.764999)
  arc A1 (161.421253, -42.764999) -> (161.291636, -33.80387) centre (160.94376, -38.290404) ccw
  circle A2 centre (111.885049, -39.000002) radius 6
  circle A3 centre (166.361389, -35.71178) radius 1.5
  circle A4 centre (166.361389, -35.71178) radius 3
  line L4 (160.94376, -38.290404) -> (151.944701, -38.420568)
  circle A5 centre (159.327217, -38.313786) radius 4.5
  line L5 (117.642551, -45.917456) -> (134.111814, -45.67924)
  line L6 (159.830351, -42.78557) -> (134.111814, -45.67924)
  line L7 (161.291636, -33.80387) -> (133.909336, -31.680705)
  line L8 (159.700806, -33.82932) -> (133.909336, -31.680705)
  circle A6 centre (150.328159, -38.443951) radius 4.5
  point P0 (0, 0)
  dimension "d146" = 6
  dimension "d147" = 9
  dimension "d148" = 9
  dimension "d149" = 9
hole "穴5" at (159.327217, -38.313786, 0) at (150.328159, -38.443951, 0) direction (0, 0, -1) diameter 3 depth 12 tip angle 118
extrude "押し出し9" cut sketch "スケッチ9" against normal blind 10 contours A1 A4 A5 L8 L0 | A1 A4 | A4 A1 L3 L6 A5 picked at (164.393308, -36.270533)
equation "\"d9\" = d7"
equation "\"d26\" = d7"
equation "\"d71\" = 0.5 * d65"
properties part number "後ろウィング中間ver2根元" material "ポリカーボネート、クリア"
